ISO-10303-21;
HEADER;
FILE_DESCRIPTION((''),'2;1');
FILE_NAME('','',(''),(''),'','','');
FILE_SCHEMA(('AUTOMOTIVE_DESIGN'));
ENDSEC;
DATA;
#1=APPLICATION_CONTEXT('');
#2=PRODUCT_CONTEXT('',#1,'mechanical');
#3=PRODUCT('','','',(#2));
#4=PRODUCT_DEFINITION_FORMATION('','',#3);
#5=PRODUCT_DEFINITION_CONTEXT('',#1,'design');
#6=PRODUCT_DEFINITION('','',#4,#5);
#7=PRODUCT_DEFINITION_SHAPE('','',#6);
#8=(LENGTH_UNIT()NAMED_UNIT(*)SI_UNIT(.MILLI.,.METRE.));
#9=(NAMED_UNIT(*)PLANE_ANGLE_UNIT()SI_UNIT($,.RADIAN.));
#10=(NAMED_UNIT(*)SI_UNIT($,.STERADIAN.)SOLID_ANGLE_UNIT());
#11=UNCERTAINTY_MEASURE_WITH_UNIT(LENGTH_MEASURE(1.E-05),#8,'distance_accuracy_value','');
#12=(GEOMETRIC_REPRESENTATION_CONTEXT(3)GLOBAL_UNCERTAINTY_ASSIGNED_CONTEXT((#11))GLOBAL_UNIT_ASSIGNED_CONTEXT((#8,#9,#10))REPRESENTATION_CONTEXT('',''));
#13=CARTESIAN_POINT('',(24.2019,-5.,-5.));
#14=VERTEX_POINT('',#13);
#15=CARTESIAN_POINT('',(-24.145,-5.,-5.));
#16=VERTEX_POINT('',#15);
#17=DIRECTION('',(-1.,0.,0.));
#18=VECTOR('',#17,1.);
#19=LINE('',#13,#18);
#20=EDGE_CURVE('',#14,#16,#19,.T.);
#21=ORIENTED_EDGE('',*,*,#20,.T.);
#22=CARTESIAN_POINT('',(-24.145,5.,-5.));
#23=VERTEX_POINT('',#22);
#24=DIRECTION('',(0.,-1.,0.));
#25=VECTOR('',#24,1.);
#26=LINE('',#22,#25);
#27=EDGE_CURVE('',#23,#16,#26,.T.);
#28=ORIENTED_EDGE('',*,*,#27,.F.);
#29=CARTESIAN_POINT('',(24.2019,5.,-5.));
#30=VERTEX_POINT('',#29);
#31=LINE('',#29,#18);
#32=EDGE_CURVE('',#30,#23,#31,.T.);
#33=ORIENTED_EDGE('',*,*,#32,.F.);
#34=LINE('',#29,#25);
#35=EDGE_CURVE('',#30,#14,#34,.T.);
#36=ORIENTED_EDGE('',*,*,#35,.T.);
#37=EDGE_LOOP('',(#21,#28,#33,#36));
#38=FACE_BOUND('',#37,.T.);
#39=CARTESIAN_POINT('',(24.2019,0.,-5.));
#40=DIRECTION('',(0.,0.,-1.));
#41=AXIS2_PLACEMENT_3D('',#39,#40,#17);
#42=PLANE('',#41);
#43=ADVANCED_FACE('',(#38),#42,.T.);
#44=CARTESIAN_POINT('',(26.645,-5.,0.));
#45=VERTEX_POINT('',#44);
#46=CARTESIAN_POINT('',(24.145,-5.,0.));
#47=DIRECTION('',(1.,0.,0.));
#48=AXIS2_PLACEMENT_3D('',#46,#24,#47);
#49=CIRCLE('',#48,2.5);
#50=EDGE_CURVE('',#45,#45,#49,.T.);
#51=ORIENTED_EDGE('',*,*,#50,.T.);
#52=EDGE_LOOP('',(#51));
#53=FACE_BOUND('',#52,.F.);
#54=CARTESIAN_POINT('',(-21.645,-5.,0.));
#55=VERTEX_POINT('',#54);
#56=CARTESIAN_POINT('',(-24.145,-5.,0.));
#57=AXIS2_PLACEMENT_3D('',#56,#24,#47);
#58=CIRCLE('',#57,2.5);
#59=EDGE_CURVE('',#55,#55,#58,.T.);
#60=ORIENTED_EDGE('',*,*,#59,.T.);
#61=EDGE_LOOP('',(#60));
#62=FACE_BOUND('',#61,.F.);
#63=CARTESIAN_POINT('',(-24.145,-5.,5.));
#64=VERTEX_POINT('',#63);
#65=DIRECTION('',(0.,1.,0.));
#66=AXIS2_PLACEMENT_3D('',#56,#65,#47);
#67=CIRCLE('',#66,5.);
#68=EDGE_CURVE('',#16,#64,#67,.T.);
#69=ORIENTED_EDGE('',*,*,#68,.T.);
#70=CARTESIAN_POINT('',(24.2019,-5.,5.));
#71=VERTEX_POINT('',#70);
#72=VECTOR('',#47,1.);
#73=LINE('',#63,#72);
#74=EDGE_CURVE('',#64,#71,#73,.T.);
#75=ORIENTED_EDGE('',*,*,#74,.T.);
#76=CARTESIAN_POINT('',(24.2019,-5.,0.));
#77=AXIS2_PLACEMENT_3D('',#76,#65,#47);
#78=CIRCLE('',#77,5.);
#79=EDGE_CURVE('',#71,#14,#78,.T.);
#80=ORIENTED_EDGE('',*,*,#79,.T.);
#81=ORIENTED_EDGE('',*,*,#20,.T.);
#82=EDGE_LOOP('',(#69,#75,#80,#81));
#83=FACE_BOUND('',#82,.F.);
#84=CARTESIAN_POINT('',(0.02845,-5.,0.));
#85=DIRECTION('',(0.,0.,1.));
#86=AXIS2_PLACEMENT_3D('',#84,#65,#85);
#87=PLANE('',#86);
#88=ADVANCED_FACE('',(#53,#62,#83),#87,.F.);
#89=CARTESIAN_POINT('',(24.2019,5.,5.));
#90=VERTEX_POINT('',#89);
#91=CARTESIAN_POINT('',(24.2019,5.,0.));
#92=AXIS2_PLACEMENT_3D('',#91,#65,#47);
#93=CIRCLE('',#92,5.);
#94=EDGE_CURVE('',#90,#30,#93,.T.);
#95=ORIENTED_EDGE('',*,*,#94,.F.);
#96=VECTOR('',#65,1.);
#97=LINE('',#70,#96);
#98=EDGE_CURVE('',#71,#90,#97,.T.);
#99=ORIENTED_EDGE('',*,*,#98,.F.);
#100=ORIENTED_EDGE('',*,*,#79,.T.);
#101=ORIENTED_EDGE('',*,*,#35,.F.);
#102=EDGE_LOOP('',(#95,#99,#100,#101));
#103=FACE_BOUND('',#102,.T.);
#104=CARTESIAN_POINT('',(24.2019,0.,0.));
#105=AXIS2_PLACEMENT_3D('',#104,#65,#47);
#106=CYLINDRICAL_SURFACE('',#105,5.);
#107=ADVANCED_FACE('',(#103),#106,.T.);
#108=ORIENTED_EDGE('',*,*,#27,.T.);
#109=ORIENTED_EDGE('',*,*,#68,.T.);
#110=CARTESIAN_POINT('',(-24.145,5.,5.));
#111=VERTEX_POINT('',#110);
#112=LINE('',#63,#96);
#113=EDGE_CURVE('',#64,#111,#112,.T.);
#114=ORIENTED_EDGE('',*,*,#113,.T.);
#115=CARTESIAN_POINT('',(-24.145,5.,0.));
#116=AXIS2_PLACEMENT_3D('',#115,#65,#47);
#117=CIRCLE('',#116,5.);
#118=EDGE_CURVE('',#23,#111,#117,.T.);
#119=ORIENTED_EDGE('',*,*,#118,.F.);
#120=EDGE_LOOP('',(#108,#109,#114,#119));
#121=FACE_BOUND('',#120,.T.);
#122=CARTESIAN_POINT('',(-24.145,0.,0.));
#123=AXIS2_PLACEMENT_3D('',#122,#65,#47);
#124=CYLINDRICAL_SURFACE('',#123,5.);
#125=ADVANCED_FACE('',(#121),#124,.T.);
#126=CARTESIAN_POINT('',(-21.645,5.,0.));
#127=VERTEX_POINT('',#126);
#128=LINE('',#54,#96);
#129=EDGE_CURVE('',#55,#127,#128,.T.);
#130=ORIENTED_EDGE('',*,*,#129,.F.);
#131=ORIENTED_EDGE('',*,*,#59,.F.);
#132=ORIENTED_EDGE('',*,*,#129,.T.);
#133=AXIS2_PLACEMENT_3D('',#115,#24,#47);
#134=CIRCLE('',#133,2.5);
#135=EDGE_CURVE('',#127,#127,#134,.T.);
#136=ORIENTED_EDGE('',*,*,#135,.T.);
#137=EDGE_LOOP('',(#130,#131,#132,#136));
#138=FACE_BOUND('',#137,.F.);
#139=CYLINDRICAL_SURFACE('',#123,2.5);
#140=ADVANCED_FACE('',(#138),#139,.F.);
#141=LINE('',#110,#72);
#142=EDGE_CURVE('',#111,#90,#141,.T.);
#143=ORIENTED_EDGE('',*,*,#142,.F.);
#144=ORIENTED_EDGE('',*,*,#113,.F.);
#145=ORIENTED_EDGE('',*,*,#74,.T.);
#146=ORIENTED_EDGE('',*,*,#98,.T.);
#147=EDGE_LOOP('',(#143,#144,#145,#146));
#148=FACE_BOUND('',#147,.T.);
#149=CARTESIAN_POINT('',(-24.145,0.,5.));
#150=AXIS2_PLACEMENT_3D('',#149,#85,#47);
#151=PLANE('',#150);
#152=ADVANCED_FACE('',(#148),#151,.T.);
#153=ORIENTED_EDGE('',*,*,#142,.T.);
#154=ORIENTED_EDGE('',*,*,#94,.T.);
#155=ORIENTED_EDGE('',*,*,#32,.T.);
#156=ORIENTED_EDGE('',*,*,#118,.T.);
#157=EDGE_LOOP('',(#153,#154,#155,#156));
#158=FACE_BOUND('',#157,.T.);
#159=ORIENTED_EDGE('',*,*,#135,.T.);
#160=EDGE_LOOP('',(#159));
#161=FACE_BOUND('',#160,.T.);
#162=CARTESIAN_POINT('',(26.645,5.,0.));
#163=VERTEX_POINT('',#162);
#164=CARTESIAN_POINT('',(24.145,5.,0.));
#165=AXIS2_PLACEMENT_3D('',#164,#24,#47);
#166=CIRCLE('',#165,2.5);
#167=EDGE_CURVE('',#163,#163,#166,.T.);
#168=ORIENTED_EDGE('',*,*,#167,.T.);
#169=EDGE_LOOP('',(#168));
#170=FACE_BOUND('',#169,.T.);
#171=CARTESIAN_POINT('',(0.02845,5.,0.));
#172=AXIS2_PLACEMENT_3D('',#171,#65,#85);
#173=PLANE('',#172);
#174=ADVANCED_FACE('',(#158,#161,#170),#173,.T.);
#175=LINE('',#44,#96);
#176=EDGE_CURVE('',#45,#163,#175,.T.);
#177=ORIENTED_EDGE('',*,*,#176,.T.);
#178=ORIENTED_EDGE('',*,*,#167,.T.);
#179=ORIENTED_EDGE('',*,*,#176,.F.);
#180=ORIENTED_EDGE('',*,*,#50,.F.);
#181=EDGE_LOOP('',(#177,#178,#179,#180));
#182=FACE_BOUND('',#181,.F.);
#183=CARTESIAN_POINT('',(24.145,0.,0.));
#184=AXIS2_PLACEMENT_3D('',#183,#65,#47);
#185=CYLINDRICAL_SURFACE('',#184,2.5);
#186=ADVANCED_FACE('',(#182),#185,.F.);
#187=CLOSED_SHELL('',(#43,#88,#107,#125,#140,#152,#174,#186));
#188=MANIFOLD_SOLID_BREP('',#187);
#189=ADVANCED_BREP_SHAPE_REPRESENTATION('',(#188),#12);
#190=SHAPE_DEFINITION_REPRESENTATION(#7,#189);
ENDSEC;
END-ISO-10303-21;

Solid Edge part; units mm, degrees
sketch "Sketch1" plane through (0, 0, 0) normal (0, -1, 0) x (1, 0, 0)
  arc A0 (-24.145, -5) -> (-24.145, 5) centre (-24.145, 0) cw
  line L0 (-24.145, 5) -> (24.2019, 5)
  arc A1 (24.2019, 5) -> (24.2019, -5) centre (24.2019, 0) cw
  line L1 (24.2019, -5) -> (-24.145, -5)
  circle A2 centre (24.145, 0) radius 2.5
  circle A3 centre (-24.145, 0) radius 2.5
  dimension "D1" = 5
  dimension "D2" = 5
  dimension "D3" = 48.29
  dimension "D4" = 24.145
  dimension "D5" = 10
  dimension "D6" = 10
extrude "Protrusion1" add sketch "Sketch1" along normal mid plane 10
